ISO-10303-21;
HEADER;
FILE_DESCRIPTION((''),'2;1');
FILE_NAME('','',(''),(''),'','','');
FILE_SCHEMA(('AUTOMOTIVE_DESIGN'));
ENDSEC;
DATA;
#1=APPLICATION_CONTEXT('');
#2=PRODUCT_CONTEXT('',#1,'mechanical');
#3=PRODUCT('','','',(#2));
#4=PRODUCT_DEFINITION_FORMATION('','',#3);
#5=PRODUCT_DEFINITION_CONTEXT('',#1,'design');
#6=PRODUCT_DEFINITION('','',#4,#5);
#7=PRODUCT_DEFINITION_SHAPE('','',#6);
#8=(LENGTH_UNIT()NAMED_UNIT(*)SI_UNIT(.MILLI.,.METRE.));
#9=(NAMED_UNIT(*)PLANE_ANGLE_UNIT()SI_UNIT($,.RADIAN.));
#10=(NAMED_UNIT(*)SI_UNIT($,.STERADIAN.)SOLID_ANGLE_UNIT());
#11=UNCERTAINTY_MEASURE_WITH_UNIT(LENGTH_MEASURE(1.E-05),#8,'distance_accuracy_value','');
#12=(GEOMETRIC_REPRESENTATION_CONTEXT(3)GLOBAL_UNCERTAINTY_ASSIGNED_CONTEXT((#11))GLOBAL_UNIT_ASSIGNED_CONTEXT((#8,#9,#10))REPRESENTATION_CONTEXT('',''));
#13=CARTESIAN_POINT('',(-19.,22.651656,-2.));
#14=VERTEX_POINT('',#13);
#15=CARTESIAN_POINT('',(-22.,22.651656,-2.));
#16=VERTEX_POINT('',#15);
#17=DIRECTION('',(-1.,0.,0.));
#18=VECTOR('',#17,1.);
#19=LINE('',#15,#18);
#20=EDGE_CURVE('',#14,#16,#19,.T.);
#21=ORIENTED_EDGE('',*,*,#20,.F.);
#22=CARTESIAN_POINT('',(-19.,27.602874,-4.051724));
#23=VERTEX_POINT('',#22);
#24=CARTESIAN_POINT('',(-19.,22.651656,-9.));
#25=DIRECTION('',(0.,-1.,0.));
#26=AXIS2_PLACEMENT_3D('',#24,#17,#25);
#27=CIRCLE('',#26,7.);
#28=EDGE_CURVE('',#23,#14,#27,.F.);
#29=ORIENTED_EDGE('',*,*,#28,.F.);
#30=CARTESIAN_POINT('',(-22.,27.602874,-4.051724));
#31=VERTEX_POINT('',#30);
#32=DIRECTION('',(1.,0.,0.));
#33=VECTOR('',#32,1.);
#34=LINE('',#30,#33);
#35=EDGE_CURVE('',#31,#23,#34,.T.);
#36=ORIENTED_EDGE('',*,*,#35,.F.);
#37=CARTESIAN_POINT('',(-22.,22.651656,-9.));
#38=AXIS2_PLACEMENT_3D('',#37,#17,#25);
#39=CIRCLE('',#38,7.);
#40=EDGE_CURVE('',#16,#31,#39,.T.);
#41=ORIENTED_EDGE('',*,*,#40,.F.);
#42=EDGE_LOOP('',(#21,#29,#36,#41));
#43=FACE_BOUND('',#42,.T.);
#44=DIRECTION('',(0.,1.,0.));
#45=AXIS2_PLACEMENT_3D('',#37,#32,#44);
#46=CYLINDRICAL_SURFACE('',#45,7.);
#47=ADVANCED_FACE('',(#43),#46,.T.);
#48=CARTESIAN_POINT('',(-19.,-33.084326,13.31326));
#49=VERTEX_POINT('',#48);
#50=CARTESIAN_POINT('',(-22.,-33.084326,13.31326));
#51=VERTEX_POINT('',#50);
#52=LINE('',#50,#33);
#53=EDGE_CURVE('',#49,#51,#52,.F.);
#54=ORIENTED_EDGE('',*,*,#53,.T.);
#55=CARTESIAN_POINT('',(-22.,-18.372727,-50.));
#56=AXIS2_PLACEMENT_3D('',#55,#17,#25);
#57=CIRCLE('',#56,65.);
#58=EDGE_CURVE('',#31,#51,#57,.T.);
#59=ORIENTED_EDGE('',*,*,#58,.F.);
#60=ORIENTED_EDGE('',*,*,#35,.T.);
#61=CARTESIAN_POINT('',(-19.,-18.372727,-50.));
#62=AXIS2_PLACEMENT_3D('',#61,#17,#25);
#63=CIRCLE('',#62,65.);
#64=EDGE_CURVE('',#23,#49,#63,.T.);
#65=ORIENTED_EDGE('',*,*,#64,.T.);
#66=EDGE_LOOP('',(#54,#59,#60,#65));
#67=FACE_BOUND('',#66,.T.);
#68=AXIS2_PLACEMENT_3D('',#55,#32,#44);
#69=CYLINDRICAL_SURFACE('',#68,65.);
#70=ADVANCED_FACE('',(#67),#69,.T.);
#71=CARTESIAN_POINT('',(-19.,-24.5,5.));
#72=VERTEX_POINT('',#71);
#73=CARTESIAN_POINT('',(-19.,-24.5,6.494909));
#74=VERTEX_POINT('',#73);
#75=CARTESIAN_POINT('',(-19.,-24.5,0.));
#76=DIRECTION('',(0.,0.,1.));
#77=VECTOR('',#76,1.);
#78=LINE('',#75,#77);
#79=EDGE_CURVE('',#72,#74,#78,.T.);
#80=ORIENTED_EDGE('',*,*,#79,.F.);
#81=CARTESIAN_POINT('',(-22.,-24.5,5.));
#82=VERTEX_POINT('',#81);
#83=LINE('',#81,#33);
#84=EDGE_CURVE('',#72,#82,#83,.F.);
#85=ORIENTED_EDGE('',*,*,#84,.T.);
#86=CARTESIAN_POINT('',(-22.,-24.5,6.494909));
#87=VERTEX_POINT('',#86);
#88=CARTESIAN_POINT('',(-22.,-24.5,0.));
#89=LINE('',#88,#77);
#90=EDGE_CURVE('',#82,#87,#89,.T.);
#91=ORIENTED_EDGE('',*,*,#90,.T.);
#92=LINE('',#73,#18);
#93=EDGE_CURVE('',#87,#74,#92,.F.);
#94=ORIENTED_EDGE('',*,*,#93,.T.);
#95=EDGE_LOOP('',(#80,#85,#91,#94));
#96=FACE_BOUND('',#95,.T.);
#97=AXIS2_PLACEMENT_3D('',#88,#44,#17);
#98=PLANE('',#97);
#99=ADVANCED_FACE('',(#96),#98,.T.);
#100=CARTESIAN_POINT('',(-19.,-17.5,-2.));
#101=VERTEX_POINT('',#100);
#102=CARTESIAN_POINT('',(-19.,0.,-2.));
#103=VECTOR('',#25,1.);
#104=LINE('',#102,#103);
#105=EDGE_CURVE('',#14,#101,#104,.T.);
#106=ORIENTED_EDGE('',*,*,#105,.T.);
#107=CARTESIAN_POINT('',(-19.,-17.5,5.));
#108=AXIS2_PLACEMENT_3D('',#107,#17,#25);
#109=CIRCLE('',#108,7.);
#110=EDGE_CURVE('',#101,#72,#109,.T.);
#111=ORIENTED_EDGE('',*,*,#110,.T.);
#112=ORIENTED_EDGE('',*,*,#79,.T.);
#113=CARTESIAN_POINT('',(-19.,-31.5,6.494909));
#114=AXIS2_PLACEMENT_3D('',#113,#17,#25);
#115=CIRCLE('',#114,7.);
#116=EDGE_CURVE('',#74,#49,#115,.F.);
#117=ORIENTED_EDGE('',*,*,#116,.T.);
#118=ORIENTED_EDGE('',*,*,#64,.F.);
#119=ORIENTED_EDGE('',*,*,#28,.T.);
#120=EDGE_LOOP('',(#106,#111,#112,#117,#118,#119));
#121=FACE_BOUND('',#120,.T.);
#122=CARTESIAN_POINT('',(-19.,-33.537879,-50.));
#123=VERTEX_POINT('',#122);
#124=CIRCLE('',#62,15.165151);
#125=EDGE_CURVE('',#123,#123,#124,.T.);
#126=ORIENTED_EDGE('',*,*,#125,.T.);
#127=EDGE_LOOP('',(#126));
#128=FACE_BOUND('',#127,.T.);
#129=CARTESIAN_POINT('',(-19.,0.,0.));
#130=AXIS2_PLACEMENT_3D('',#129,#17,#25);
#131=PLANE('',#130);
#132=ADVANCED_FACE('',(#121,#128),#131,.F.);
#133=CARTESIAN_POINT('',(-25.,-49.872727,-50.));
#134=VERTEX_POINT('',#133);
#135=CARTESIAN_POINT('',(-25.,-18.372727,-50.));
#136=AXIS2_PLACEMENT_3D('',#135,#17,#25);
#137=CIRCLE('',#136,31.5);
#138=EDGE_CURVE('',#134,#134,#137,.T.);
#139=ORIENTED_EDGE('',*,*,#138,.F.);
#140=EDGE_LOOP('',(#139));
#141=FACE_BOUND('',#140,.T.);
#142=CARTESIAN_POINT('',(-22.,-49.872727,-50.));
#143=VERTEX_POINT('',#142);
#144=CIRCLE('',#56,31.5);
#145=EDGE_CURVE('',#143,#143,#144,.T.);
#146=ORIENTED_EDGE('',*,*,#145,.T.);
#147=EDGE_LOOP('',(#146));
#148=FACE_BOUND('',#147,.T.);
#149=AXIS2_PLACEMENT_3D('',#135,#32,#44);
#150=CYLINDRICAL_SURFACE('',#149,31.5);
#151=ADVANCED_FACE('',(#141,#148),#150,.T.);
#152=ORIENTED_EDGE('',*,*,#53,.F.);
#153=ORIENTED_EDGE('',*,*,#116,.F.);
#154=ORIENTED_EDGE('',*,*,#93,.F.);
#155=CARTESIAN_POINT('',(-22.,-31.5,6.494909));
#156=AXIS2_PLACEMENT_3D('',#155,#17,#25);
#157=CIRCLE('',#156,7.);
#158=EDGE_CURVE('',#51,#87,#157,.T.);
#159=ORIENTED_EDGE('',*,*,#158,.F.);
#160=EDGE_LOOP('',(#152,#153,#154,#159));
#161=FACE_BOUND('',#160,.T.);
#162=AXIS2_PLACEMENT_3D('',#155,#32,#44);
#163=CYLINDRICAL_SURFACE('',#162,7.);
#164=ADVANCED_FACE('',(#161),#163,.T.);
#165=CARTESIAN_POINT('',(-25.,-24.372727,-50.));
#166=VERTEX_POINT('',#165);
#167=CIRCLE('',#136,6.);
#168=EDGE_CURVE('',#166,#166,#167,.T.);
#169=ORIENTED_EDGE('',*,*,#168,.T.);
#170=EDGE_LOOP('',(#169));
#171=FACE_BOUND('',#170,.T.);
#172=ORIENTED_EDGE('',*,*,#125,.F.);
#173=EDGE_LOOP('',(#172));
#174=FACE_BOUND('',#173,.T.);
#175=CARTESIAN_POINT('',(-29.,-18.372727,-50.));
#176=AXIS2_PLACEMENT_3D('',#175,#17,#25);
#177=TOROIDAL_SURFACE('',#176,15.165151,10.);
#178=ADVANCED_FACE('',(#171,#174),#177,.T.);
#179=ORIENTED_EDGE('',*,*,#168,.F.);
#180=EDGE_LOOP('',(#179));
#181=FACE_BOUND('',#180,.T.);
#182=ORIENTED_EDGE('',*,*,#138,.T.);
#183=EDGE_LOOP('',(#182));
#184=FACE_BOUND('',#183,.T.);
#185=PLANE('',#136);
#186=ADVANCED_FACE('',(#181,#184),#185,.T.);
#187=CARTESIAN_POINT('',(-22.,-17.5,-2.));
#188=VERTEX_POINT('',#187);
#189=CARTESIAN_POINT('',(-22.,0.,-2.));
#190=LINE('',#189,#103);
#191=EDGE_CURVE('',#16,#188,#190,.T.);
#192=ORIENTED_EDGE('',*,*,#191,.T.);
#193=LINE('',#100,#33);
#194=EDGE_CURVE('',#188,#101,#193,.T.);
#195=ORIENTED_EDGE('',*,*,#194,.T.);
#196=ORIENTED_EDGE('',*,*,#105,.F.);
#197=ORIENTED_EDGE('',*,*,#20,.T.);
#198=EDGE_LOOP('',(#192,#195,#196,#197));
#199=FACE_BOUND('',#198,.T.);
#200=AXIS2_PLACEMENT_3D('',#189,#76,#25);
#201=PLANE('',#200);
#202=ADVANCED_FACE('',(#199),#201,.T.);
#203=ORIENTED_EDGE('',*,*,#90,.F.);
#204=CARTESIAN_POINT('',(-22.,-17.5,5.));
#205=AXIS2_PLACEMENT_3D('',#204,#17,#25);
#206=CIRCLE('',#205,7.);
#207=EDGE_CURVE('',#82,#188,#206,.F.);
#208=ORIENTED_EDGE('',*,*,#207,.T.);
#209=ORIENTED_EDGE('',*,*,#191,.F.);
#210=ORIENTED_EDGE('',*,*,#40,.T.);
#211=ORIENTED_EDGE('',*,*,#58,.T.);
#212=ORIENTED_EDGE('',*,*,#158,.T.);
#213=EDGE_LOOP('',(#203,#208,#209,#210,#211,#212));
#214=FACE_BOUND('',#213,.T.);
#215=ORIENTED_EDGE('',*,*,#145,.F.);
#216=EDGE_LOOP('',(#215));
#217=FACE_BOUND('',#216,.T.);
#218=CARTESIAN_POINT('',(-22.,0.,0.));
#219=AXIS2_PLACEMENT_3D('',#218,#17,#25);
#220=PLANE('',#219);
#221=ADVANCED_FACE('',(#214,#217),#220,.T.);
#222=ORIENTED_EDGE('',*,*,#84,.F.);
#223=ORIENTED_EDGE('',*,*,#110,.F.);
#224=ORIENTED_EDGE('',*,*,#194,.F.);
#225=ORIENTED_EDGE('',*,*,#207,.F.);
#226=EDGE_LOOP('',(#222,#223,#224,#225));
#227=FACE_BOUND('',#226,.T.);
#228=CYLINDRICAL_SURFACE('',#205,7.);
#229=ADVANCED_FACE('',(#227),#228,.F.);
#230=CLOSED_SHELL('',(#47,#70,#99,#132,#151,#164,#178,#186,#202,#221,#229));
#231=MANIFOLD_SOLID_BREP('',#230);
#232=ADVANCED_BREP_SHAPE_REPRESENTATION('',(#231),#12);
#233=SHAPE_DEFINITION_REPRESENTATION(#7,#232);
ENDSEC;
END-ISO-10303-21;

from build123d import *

# Parameters (mm, degrees)
SKETCH1_W           = 52
SKETCH1_H           = 38
BULK_EXTRUDE_DEPTH  = 3
FILLET1_R           = 7
SKETCH2_R           = 31.5
MOTOR_SUPPORT_DEPTH = 3
SKETCH3_R           = 6
WIRE_PASSTHRU_DEPTH = 143.168954603
FILLET2_R           = 10


with BuildPart() as part:
    # Sketch1 → BULK EXTRUDE (new body)
    # profile 1 of 3: a face of its own
    with BuildSketch(Plane.ZY.offset(19)):
        with BuildLine():
            Line((-2, -62.201941274), (-2, -24.5))
            Line((-2, -24.5), (-2, 25.456486729))
            ThreePointArc((-2, 25.456486729), (-115, -18.372727273), (-2, -62.201941274))
        make_face()
        with Locations((-57, 0)):
            Rectangle(SKETCH1_W, SKETCH1_H, mode=Mode.SUBTRACT)
    # profile 2 of 3: a face of its own
    with BuildSketch(Plane.ZY.offset(19)):
        with Locations((-57, 0)):
            Rectangle(SKETCH1_W, SKETCH1_H)
    # profile 3 of 3: a face of its own
    with BuildSketch(Plane.ZY.offset(19)):
        with BuildLine():
            Line((14.71055964, -24.5), (-2, -24.5))
            Line((-2, -24.5), (-2, -62.201941274))
            ThreePointArc((-2, -62.201941274), (9.424545918, -44.711355605), (14.71055964, -24.5))
        make_face()
    extrude(amount=BULK_EXTRUDE_DEPTH)

    # Fillet1
    fillet1_edges = [part.edges().sort_by_distance(p)[0] for p in [
        (-20.5, -24.5, -2),
        (-20.5, -24.5, 14.71055964),
        (-20.5, 25.456486729, -2),
    ]]
    fillet(fillet1_edges, radius=FILLET1_R)

    # Sketch2 → MOTOR SUPPORT (add)
    with BuildSketch(Plane.ZY.offset(22)):
        with Locations(Location((-50, -18.372727273, 0), (0, 0, 270))):
            Circle(SKETCH2_R)
    extrude(amount=MOTOR_SUPPORT_DEPTH)

    # Sketch3 → WIRE PASSTHRU (cut, through all)
    with BuildSketch(Plane.ZY.offset(25)):
        with Locations(Location((-50, -18.372727273, 0), (0, 0, 270))):
            Circle(SKETCH3_R)
    extrude(amount=-WIRE_PASSTHRU_DEPTH, mode=Mode.SUBTRACT)

    # Fillet2
    # the kernel refuses this fillet: 10 mm, written as the material it takes off along each edge
    with BuildSketch(Plane(origin=(-19, -18.372727273, -50), x_dir=(0, -1, 0), z_dir=(0, 0, -1))) as fillet2_piece_1:
        with BuildLine():
            CenterArc((15.16515139, 10), FILLET2_R, 203.578178478, 66.421821522)
            Line((6, 6), (5.816696972, 5.92))
            ThreePointArc((5.816696972, 5.92), (5.8, 3), (5.8, 0))
            Line((5.8, 0), (6, -0.2))
            Line((6, -0.2), (15.16515139, -0.2))
            Line((15.16515139, -0.2), (15.16515139, 0))
        make_face()
    revolve(axis=Axis((-19, -18.372727273, -50), (-1, 0, 0)), mode=Mode.SUBTRACT)


solid = part.part
